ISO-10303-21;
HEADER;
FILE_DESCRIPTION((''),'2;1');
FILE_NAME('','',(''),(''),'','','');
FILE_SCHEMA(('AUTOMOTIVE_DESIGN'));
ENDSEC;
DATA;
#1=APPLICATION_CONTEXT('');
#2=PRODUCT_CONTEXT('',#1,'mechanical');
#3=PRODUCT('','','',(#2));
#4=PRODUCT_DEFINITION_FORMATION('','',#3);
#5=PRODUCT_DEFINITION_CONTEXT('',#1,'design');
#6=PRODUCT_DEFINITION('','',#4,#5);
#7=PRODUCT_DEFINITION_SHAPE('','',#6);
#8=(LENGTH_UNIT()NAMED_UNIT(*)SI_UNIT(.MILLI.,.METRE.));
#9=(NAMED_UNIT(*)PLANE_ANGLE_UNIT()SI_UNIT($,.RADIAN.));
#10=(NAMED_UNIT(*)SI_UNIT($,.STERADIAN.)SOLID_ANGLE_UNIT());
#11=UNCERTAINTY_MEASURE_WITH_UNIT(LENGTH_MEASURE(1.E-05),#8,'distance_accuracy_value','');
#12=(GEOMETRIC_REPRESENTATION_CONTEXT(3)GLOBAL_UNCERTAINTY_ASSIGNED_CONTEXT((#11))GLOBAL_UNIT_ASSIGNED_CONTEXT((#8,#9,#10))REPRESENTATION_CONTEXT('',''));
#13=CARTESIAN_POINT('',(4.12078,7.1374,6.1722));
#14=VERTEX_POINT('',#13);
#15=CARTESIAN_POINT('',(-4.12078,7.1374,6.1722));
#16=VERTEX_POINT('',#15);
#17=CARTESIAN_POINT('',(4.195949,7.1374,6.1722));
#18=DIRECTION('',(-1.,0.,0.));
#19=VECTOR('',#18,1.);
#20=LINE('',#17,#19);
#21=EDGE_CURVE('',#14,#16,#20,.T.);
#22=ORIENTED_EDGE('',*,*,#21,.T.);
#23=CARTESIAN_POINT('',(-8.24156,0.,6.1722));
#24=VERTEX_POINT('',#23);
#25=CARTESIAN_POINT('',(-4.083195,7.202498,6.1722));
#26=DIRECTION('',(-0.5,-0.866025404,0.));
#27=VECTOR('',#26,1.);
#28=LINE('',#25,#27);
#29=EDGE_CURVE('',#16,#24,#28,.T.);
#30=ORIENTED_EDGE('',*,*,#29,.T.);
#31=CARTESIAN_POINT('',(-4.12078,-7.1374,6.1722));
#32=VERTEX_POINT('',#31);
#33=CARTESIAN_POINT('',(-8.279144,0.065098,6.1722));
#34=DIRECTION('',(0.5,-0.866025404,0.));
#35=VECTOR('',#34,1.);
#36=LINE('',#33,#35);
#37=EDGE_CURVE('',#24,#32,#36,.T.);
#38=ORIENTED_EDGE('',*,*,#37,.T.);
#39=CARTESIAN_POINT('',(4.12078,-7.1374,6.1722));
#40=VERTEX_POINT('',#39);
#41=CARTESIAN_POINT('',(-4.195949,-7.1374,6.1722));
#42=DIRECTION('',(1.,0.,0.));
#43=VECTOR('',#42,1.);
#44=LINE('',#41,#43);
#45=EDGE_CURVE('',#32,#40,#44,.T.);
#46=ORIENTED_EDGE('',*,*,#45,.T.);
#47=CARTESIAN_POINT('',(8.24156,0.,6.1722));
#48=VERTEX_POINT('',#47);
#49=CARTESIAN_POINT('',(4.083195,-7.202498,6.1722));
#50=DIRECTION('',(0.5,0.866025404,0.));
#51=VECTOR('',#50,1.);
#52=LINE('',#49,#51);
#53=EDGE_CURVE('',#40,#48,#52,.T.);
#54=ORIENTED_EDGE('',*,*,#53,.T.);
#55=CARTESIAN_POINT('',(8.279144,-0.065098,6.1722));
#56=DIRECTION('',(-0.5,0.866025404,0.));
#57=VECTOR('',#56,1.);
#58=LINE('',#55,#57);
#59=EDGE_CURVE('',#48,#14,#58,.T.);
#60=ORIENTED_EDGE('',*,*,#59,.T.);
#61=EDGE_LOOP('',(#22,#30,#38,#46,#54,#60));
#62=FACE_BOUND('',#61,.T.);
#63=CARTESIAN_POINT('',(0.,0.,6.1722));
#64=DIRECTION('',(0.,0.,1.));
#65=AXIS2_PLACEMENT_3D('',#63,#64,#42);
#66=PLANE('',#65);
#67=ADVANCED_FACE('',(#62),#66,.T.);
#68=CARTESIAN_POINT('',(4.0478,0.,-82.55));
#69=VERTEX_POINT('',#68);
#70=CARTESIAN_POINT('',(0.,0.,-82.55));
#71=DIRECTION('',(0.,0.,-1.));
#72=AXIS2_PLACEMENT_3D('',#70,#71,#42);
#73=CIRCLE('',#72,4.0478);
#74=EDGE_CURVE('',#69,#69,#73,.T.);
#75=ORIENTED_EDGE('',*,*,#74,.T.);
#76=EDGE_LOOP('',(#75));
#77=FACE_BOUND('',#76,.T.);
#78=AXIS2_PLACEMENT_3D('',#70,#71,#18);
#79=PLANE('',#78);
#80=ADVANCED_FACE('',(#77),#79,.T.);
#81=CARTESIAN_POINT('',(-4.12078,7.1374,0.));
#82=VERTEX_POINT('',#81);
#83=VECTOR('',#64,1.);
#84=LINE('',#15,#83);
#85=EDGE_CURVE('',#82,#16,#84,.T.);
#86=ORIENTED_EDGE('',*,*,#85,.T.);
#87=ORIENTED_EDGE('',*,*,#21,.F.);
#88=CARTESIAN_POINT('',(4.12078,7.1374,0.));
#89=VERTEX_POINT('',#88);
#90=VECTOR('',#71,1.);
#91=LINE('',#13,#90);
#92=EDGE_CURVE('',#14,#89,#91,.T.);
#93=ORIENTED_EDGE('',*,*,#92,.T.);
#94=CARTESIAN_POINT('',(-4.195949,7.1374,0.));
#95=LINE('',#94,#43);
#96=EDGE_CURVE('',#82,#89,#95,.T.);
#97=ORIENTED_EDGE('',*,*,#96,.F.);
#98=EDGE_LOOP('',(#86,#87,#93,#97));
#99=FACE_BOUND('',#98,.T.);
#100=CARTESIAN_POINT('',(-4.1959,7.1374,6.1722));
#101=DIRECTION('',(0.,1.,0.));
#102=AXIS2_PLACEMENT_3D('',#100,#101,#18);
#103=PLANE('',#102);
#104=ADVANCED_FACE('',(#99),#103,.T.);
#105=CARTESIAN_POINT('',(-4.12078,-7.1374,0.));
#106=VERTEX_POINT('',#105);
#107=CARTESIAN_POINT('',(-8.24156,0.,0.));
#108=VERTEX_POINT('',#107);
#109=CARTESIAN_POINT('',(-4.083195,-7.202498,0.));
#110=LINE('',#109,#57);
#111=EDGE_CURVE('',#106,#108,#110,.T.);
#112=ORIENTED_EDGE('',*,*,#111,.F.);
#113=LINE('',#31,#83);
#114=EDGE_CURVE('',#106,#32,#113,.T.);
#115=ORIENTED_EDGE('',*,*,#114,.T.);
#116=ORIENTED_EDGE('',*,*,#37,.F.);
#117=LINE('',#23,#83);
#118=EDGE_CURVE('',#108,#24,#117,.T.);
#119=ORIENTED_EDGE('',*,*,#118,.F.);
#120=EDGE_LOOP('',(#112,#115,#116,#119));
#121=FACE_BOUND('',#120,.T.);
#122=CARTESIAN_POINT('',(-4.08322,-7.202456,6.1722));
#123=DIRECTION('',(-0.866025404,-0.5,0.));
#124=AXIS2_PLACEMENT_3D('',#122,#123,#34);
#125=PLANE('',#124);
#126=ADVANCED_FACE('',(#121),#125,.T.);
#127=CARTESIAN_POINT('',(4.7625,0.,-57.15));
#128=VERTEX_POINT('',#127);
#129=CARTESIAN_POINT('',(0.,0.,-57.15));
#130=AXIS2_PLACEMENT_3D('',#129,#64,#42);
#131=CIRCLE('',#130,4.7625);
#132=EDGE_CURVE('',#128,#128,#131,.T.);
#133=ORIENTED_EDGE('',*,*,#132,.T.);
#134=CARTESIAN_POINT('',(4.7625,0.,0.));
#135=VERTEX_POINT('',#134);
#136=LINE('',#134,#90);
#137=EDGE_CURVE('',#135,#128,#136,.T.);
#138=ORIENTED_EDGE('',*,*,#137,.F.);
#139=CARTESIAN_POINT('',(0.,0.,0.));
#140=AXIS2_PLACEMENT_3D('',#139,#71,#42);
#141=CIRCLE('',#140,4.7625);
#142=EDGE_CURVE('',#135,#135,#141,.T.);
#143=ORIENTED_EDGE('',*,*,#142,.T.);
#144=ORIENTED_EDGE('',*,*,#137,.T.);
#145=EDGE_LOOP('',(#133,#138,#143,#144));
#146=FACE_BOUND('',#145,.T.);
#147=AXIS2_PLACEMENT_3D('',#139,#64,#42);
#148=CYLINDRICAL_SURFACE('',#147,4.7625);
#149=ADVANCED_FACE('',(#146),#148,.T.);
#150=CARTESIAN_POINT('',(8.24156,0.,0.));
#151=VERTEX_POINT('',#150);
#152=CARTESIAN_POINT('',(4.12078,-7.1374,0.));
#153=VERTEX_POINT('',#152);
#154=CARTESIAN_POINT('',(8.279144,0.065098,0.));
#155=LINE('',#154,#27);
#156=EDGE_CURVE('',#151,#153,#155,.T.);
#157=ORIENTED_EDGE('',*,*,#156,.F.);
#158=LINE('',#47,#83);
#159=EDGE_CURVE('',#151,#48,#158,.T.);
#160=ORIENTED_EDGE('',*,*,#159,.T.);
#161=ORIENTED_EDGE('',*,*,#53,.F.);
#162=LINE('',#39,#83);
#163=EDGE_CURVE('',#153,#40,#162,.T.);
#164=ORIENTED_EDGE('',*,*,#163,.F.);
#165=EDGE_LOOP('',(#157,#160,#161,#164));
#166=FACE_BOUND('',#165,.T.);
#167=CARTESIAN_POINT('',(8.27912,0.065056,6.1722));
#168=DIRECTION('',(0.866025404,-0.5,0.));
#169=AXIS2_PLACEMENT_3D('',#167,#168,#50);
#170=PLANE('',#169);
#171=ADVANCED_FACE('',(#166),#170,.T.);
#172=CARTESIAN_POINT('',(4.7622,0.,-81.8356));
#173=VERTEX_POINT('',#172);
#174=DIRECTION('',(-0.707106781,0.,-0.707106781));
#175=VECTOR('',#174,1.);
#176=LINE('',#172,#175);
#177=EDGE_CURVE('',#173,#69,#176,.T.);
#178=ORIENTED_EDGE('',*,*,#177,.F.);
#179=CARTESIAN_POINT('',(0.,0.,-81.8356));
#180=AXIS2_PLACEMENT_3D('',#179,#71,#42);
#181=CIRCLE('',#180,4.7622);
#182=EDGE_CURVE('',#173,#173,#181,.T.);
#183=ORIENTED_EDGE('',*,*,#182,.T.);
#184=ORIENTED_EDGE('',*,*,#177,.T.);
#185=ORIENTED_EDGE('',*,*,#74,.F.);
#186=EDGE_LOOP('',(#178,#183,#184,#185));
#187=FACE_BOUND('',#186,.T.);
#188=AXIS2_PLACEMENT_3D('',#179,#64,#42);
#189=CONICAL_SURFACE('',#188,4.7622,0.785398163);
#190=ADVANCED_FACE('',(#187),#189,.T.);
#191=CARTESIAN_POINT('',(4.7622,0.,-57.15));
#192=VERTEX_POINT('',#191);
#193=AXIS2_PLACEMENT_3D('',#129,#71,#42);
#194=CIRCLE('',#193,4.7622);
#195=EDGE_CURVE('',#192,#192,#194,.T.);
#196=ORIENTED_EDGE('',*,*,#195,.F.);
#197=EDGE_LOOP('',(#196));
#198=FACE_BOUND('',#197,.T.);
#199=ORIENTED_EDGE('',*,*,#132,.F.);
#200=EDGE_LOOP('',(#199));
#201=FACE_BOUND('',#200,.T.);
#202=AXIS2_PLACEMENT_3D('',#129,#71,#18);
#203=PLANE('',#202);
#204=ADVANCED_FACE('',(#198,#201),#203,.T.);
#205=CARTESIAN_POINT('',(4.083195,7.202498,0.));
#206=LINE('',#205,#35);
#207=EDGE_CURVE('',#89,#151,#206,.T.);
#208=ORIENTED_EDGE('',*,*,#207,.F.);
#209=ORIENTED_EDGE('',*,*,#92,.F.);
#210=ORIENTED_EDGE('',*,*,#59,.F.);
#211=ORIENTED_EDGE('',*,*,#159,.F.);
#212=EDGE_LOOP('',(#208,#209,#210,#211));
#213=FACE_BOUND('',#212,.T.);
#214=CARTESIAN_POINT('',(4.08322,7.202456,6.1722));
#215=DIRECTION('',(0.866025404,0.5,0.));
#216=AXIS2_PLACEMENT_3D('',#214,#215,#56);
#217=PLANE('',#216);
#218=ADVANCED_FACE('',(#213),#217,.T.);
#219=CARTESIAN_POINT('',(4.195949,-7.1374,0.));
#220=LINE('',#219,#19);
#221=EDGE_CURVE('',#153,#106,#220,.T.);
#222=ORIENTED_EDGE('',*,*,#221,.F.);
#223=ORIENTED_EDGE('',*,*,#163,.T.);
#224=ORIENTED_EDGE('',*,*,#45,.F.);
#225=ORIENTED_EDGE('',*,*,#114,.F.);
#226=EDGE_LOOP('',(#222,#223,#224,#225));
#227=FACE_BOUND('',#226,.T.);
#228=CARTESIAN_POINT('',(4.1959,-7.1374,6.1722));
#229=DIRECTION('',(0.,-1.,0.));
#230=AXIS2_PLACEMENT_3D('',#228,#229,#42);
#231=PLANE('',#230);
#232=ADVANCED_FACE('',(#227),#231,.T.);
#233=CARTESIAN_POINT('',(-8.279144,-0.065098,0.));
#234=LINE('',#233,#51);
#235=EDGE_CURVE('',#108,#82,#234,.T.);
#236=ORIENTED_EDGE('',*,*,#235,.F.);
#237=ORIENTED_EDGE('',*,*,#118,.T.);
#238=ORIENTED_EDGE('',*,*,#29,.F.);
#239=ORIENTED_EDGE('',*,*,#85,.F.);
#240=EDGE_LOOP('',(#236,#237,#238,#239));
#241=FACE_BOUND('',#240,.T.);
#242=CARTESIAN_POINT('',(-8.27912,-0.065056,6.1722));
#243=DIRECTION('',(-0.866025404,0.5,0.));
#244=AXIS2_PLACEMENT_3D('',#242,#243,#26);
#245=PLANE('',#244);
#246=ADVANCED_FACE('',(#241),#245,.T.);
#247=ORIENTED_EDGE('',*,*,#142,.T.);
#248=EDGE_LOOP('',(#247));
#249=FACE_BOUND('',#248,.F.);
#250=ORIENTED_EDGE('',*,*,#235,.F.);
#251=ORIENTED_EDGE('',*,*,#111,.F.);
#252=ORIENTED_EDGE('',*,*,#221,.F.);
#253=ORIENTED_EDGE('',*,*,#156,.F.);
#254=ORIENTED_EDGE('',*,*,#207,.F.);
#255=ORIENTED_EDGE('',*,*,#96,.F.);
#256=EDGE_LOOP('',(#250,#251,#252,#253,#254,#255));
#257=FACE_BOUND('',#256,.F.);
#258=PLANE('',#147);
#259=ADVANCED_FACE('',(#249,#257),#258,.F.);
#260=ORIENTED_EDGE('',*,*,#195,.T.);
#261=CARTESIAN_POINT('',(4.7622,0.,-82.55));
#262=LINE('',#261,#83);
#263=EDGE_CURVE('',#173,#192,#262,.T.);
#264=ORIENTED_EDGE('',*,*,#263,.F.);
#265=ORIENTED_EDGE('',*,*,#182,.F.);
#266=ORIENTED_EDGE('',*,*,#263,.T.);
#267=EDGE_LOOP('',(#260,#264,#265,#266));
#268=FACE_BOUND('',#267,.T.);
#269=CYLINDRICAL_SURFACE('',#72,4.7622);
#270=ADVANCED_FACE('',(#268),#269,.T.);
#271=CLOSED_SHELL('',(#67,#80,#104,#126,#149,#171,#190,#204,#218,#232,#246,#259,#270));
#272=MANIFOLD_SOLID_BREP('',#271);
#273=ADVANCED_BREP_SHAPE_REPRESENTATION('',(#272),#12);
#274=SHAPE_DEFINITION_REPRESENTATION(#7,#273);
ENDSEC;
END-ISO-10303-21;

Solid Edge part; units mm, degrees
sketch "Sketch1" plane through (0, 0, 0) normal (0, 0, 1) x (1, 0, 0)
  circle A0 centre (0, 0) radius 8.2794
  dimension "D1" = 16.5588
extrude "Protrusion1" add sketch "Sketch1" along normal blind 6.1722
sketch "Sketch2" plane through (0, 0, 0) normal (0, 0, -1) x (1, 0, 0)
  circle A0 centre (0, 0) radius 4.7625
extrude "Protrusion2" add sketch "Sketch2" along normal blind 82.55
sketch "Sketch3" plane through (0, 0, -82.55) normal (0, 0, -1) x (1, 0, 0)
  circle A0 centre (0, 0) radius 4.7622
extrude "Cutout1" cut sketch "Sketch3" against normal blind 25.4 flip side to cut
chamfer "Chamfer_1" distance 0.7144 angle 45 1 edges at (-4.7622, 0, -82.55)
sketch "Sketch4" plane through (0, 0, 6.1722) normal (0, 0, 1) x (1, 0, 0)
  line L0 (-4.1959, 7.1374) -> (4.1959, 7.1374)
  dimension "D1" = 14.2748
extrude "Cutout2" cut sketch "Sketch4" against normal up to next material side at (0, 7.1874, 6.1722)
pattern_circular "Pattern1" count 6 over 360 about axis through (0, 0, 6.1722) along (0, 0, 1) of "Cutout2"
properties part number "117630"
